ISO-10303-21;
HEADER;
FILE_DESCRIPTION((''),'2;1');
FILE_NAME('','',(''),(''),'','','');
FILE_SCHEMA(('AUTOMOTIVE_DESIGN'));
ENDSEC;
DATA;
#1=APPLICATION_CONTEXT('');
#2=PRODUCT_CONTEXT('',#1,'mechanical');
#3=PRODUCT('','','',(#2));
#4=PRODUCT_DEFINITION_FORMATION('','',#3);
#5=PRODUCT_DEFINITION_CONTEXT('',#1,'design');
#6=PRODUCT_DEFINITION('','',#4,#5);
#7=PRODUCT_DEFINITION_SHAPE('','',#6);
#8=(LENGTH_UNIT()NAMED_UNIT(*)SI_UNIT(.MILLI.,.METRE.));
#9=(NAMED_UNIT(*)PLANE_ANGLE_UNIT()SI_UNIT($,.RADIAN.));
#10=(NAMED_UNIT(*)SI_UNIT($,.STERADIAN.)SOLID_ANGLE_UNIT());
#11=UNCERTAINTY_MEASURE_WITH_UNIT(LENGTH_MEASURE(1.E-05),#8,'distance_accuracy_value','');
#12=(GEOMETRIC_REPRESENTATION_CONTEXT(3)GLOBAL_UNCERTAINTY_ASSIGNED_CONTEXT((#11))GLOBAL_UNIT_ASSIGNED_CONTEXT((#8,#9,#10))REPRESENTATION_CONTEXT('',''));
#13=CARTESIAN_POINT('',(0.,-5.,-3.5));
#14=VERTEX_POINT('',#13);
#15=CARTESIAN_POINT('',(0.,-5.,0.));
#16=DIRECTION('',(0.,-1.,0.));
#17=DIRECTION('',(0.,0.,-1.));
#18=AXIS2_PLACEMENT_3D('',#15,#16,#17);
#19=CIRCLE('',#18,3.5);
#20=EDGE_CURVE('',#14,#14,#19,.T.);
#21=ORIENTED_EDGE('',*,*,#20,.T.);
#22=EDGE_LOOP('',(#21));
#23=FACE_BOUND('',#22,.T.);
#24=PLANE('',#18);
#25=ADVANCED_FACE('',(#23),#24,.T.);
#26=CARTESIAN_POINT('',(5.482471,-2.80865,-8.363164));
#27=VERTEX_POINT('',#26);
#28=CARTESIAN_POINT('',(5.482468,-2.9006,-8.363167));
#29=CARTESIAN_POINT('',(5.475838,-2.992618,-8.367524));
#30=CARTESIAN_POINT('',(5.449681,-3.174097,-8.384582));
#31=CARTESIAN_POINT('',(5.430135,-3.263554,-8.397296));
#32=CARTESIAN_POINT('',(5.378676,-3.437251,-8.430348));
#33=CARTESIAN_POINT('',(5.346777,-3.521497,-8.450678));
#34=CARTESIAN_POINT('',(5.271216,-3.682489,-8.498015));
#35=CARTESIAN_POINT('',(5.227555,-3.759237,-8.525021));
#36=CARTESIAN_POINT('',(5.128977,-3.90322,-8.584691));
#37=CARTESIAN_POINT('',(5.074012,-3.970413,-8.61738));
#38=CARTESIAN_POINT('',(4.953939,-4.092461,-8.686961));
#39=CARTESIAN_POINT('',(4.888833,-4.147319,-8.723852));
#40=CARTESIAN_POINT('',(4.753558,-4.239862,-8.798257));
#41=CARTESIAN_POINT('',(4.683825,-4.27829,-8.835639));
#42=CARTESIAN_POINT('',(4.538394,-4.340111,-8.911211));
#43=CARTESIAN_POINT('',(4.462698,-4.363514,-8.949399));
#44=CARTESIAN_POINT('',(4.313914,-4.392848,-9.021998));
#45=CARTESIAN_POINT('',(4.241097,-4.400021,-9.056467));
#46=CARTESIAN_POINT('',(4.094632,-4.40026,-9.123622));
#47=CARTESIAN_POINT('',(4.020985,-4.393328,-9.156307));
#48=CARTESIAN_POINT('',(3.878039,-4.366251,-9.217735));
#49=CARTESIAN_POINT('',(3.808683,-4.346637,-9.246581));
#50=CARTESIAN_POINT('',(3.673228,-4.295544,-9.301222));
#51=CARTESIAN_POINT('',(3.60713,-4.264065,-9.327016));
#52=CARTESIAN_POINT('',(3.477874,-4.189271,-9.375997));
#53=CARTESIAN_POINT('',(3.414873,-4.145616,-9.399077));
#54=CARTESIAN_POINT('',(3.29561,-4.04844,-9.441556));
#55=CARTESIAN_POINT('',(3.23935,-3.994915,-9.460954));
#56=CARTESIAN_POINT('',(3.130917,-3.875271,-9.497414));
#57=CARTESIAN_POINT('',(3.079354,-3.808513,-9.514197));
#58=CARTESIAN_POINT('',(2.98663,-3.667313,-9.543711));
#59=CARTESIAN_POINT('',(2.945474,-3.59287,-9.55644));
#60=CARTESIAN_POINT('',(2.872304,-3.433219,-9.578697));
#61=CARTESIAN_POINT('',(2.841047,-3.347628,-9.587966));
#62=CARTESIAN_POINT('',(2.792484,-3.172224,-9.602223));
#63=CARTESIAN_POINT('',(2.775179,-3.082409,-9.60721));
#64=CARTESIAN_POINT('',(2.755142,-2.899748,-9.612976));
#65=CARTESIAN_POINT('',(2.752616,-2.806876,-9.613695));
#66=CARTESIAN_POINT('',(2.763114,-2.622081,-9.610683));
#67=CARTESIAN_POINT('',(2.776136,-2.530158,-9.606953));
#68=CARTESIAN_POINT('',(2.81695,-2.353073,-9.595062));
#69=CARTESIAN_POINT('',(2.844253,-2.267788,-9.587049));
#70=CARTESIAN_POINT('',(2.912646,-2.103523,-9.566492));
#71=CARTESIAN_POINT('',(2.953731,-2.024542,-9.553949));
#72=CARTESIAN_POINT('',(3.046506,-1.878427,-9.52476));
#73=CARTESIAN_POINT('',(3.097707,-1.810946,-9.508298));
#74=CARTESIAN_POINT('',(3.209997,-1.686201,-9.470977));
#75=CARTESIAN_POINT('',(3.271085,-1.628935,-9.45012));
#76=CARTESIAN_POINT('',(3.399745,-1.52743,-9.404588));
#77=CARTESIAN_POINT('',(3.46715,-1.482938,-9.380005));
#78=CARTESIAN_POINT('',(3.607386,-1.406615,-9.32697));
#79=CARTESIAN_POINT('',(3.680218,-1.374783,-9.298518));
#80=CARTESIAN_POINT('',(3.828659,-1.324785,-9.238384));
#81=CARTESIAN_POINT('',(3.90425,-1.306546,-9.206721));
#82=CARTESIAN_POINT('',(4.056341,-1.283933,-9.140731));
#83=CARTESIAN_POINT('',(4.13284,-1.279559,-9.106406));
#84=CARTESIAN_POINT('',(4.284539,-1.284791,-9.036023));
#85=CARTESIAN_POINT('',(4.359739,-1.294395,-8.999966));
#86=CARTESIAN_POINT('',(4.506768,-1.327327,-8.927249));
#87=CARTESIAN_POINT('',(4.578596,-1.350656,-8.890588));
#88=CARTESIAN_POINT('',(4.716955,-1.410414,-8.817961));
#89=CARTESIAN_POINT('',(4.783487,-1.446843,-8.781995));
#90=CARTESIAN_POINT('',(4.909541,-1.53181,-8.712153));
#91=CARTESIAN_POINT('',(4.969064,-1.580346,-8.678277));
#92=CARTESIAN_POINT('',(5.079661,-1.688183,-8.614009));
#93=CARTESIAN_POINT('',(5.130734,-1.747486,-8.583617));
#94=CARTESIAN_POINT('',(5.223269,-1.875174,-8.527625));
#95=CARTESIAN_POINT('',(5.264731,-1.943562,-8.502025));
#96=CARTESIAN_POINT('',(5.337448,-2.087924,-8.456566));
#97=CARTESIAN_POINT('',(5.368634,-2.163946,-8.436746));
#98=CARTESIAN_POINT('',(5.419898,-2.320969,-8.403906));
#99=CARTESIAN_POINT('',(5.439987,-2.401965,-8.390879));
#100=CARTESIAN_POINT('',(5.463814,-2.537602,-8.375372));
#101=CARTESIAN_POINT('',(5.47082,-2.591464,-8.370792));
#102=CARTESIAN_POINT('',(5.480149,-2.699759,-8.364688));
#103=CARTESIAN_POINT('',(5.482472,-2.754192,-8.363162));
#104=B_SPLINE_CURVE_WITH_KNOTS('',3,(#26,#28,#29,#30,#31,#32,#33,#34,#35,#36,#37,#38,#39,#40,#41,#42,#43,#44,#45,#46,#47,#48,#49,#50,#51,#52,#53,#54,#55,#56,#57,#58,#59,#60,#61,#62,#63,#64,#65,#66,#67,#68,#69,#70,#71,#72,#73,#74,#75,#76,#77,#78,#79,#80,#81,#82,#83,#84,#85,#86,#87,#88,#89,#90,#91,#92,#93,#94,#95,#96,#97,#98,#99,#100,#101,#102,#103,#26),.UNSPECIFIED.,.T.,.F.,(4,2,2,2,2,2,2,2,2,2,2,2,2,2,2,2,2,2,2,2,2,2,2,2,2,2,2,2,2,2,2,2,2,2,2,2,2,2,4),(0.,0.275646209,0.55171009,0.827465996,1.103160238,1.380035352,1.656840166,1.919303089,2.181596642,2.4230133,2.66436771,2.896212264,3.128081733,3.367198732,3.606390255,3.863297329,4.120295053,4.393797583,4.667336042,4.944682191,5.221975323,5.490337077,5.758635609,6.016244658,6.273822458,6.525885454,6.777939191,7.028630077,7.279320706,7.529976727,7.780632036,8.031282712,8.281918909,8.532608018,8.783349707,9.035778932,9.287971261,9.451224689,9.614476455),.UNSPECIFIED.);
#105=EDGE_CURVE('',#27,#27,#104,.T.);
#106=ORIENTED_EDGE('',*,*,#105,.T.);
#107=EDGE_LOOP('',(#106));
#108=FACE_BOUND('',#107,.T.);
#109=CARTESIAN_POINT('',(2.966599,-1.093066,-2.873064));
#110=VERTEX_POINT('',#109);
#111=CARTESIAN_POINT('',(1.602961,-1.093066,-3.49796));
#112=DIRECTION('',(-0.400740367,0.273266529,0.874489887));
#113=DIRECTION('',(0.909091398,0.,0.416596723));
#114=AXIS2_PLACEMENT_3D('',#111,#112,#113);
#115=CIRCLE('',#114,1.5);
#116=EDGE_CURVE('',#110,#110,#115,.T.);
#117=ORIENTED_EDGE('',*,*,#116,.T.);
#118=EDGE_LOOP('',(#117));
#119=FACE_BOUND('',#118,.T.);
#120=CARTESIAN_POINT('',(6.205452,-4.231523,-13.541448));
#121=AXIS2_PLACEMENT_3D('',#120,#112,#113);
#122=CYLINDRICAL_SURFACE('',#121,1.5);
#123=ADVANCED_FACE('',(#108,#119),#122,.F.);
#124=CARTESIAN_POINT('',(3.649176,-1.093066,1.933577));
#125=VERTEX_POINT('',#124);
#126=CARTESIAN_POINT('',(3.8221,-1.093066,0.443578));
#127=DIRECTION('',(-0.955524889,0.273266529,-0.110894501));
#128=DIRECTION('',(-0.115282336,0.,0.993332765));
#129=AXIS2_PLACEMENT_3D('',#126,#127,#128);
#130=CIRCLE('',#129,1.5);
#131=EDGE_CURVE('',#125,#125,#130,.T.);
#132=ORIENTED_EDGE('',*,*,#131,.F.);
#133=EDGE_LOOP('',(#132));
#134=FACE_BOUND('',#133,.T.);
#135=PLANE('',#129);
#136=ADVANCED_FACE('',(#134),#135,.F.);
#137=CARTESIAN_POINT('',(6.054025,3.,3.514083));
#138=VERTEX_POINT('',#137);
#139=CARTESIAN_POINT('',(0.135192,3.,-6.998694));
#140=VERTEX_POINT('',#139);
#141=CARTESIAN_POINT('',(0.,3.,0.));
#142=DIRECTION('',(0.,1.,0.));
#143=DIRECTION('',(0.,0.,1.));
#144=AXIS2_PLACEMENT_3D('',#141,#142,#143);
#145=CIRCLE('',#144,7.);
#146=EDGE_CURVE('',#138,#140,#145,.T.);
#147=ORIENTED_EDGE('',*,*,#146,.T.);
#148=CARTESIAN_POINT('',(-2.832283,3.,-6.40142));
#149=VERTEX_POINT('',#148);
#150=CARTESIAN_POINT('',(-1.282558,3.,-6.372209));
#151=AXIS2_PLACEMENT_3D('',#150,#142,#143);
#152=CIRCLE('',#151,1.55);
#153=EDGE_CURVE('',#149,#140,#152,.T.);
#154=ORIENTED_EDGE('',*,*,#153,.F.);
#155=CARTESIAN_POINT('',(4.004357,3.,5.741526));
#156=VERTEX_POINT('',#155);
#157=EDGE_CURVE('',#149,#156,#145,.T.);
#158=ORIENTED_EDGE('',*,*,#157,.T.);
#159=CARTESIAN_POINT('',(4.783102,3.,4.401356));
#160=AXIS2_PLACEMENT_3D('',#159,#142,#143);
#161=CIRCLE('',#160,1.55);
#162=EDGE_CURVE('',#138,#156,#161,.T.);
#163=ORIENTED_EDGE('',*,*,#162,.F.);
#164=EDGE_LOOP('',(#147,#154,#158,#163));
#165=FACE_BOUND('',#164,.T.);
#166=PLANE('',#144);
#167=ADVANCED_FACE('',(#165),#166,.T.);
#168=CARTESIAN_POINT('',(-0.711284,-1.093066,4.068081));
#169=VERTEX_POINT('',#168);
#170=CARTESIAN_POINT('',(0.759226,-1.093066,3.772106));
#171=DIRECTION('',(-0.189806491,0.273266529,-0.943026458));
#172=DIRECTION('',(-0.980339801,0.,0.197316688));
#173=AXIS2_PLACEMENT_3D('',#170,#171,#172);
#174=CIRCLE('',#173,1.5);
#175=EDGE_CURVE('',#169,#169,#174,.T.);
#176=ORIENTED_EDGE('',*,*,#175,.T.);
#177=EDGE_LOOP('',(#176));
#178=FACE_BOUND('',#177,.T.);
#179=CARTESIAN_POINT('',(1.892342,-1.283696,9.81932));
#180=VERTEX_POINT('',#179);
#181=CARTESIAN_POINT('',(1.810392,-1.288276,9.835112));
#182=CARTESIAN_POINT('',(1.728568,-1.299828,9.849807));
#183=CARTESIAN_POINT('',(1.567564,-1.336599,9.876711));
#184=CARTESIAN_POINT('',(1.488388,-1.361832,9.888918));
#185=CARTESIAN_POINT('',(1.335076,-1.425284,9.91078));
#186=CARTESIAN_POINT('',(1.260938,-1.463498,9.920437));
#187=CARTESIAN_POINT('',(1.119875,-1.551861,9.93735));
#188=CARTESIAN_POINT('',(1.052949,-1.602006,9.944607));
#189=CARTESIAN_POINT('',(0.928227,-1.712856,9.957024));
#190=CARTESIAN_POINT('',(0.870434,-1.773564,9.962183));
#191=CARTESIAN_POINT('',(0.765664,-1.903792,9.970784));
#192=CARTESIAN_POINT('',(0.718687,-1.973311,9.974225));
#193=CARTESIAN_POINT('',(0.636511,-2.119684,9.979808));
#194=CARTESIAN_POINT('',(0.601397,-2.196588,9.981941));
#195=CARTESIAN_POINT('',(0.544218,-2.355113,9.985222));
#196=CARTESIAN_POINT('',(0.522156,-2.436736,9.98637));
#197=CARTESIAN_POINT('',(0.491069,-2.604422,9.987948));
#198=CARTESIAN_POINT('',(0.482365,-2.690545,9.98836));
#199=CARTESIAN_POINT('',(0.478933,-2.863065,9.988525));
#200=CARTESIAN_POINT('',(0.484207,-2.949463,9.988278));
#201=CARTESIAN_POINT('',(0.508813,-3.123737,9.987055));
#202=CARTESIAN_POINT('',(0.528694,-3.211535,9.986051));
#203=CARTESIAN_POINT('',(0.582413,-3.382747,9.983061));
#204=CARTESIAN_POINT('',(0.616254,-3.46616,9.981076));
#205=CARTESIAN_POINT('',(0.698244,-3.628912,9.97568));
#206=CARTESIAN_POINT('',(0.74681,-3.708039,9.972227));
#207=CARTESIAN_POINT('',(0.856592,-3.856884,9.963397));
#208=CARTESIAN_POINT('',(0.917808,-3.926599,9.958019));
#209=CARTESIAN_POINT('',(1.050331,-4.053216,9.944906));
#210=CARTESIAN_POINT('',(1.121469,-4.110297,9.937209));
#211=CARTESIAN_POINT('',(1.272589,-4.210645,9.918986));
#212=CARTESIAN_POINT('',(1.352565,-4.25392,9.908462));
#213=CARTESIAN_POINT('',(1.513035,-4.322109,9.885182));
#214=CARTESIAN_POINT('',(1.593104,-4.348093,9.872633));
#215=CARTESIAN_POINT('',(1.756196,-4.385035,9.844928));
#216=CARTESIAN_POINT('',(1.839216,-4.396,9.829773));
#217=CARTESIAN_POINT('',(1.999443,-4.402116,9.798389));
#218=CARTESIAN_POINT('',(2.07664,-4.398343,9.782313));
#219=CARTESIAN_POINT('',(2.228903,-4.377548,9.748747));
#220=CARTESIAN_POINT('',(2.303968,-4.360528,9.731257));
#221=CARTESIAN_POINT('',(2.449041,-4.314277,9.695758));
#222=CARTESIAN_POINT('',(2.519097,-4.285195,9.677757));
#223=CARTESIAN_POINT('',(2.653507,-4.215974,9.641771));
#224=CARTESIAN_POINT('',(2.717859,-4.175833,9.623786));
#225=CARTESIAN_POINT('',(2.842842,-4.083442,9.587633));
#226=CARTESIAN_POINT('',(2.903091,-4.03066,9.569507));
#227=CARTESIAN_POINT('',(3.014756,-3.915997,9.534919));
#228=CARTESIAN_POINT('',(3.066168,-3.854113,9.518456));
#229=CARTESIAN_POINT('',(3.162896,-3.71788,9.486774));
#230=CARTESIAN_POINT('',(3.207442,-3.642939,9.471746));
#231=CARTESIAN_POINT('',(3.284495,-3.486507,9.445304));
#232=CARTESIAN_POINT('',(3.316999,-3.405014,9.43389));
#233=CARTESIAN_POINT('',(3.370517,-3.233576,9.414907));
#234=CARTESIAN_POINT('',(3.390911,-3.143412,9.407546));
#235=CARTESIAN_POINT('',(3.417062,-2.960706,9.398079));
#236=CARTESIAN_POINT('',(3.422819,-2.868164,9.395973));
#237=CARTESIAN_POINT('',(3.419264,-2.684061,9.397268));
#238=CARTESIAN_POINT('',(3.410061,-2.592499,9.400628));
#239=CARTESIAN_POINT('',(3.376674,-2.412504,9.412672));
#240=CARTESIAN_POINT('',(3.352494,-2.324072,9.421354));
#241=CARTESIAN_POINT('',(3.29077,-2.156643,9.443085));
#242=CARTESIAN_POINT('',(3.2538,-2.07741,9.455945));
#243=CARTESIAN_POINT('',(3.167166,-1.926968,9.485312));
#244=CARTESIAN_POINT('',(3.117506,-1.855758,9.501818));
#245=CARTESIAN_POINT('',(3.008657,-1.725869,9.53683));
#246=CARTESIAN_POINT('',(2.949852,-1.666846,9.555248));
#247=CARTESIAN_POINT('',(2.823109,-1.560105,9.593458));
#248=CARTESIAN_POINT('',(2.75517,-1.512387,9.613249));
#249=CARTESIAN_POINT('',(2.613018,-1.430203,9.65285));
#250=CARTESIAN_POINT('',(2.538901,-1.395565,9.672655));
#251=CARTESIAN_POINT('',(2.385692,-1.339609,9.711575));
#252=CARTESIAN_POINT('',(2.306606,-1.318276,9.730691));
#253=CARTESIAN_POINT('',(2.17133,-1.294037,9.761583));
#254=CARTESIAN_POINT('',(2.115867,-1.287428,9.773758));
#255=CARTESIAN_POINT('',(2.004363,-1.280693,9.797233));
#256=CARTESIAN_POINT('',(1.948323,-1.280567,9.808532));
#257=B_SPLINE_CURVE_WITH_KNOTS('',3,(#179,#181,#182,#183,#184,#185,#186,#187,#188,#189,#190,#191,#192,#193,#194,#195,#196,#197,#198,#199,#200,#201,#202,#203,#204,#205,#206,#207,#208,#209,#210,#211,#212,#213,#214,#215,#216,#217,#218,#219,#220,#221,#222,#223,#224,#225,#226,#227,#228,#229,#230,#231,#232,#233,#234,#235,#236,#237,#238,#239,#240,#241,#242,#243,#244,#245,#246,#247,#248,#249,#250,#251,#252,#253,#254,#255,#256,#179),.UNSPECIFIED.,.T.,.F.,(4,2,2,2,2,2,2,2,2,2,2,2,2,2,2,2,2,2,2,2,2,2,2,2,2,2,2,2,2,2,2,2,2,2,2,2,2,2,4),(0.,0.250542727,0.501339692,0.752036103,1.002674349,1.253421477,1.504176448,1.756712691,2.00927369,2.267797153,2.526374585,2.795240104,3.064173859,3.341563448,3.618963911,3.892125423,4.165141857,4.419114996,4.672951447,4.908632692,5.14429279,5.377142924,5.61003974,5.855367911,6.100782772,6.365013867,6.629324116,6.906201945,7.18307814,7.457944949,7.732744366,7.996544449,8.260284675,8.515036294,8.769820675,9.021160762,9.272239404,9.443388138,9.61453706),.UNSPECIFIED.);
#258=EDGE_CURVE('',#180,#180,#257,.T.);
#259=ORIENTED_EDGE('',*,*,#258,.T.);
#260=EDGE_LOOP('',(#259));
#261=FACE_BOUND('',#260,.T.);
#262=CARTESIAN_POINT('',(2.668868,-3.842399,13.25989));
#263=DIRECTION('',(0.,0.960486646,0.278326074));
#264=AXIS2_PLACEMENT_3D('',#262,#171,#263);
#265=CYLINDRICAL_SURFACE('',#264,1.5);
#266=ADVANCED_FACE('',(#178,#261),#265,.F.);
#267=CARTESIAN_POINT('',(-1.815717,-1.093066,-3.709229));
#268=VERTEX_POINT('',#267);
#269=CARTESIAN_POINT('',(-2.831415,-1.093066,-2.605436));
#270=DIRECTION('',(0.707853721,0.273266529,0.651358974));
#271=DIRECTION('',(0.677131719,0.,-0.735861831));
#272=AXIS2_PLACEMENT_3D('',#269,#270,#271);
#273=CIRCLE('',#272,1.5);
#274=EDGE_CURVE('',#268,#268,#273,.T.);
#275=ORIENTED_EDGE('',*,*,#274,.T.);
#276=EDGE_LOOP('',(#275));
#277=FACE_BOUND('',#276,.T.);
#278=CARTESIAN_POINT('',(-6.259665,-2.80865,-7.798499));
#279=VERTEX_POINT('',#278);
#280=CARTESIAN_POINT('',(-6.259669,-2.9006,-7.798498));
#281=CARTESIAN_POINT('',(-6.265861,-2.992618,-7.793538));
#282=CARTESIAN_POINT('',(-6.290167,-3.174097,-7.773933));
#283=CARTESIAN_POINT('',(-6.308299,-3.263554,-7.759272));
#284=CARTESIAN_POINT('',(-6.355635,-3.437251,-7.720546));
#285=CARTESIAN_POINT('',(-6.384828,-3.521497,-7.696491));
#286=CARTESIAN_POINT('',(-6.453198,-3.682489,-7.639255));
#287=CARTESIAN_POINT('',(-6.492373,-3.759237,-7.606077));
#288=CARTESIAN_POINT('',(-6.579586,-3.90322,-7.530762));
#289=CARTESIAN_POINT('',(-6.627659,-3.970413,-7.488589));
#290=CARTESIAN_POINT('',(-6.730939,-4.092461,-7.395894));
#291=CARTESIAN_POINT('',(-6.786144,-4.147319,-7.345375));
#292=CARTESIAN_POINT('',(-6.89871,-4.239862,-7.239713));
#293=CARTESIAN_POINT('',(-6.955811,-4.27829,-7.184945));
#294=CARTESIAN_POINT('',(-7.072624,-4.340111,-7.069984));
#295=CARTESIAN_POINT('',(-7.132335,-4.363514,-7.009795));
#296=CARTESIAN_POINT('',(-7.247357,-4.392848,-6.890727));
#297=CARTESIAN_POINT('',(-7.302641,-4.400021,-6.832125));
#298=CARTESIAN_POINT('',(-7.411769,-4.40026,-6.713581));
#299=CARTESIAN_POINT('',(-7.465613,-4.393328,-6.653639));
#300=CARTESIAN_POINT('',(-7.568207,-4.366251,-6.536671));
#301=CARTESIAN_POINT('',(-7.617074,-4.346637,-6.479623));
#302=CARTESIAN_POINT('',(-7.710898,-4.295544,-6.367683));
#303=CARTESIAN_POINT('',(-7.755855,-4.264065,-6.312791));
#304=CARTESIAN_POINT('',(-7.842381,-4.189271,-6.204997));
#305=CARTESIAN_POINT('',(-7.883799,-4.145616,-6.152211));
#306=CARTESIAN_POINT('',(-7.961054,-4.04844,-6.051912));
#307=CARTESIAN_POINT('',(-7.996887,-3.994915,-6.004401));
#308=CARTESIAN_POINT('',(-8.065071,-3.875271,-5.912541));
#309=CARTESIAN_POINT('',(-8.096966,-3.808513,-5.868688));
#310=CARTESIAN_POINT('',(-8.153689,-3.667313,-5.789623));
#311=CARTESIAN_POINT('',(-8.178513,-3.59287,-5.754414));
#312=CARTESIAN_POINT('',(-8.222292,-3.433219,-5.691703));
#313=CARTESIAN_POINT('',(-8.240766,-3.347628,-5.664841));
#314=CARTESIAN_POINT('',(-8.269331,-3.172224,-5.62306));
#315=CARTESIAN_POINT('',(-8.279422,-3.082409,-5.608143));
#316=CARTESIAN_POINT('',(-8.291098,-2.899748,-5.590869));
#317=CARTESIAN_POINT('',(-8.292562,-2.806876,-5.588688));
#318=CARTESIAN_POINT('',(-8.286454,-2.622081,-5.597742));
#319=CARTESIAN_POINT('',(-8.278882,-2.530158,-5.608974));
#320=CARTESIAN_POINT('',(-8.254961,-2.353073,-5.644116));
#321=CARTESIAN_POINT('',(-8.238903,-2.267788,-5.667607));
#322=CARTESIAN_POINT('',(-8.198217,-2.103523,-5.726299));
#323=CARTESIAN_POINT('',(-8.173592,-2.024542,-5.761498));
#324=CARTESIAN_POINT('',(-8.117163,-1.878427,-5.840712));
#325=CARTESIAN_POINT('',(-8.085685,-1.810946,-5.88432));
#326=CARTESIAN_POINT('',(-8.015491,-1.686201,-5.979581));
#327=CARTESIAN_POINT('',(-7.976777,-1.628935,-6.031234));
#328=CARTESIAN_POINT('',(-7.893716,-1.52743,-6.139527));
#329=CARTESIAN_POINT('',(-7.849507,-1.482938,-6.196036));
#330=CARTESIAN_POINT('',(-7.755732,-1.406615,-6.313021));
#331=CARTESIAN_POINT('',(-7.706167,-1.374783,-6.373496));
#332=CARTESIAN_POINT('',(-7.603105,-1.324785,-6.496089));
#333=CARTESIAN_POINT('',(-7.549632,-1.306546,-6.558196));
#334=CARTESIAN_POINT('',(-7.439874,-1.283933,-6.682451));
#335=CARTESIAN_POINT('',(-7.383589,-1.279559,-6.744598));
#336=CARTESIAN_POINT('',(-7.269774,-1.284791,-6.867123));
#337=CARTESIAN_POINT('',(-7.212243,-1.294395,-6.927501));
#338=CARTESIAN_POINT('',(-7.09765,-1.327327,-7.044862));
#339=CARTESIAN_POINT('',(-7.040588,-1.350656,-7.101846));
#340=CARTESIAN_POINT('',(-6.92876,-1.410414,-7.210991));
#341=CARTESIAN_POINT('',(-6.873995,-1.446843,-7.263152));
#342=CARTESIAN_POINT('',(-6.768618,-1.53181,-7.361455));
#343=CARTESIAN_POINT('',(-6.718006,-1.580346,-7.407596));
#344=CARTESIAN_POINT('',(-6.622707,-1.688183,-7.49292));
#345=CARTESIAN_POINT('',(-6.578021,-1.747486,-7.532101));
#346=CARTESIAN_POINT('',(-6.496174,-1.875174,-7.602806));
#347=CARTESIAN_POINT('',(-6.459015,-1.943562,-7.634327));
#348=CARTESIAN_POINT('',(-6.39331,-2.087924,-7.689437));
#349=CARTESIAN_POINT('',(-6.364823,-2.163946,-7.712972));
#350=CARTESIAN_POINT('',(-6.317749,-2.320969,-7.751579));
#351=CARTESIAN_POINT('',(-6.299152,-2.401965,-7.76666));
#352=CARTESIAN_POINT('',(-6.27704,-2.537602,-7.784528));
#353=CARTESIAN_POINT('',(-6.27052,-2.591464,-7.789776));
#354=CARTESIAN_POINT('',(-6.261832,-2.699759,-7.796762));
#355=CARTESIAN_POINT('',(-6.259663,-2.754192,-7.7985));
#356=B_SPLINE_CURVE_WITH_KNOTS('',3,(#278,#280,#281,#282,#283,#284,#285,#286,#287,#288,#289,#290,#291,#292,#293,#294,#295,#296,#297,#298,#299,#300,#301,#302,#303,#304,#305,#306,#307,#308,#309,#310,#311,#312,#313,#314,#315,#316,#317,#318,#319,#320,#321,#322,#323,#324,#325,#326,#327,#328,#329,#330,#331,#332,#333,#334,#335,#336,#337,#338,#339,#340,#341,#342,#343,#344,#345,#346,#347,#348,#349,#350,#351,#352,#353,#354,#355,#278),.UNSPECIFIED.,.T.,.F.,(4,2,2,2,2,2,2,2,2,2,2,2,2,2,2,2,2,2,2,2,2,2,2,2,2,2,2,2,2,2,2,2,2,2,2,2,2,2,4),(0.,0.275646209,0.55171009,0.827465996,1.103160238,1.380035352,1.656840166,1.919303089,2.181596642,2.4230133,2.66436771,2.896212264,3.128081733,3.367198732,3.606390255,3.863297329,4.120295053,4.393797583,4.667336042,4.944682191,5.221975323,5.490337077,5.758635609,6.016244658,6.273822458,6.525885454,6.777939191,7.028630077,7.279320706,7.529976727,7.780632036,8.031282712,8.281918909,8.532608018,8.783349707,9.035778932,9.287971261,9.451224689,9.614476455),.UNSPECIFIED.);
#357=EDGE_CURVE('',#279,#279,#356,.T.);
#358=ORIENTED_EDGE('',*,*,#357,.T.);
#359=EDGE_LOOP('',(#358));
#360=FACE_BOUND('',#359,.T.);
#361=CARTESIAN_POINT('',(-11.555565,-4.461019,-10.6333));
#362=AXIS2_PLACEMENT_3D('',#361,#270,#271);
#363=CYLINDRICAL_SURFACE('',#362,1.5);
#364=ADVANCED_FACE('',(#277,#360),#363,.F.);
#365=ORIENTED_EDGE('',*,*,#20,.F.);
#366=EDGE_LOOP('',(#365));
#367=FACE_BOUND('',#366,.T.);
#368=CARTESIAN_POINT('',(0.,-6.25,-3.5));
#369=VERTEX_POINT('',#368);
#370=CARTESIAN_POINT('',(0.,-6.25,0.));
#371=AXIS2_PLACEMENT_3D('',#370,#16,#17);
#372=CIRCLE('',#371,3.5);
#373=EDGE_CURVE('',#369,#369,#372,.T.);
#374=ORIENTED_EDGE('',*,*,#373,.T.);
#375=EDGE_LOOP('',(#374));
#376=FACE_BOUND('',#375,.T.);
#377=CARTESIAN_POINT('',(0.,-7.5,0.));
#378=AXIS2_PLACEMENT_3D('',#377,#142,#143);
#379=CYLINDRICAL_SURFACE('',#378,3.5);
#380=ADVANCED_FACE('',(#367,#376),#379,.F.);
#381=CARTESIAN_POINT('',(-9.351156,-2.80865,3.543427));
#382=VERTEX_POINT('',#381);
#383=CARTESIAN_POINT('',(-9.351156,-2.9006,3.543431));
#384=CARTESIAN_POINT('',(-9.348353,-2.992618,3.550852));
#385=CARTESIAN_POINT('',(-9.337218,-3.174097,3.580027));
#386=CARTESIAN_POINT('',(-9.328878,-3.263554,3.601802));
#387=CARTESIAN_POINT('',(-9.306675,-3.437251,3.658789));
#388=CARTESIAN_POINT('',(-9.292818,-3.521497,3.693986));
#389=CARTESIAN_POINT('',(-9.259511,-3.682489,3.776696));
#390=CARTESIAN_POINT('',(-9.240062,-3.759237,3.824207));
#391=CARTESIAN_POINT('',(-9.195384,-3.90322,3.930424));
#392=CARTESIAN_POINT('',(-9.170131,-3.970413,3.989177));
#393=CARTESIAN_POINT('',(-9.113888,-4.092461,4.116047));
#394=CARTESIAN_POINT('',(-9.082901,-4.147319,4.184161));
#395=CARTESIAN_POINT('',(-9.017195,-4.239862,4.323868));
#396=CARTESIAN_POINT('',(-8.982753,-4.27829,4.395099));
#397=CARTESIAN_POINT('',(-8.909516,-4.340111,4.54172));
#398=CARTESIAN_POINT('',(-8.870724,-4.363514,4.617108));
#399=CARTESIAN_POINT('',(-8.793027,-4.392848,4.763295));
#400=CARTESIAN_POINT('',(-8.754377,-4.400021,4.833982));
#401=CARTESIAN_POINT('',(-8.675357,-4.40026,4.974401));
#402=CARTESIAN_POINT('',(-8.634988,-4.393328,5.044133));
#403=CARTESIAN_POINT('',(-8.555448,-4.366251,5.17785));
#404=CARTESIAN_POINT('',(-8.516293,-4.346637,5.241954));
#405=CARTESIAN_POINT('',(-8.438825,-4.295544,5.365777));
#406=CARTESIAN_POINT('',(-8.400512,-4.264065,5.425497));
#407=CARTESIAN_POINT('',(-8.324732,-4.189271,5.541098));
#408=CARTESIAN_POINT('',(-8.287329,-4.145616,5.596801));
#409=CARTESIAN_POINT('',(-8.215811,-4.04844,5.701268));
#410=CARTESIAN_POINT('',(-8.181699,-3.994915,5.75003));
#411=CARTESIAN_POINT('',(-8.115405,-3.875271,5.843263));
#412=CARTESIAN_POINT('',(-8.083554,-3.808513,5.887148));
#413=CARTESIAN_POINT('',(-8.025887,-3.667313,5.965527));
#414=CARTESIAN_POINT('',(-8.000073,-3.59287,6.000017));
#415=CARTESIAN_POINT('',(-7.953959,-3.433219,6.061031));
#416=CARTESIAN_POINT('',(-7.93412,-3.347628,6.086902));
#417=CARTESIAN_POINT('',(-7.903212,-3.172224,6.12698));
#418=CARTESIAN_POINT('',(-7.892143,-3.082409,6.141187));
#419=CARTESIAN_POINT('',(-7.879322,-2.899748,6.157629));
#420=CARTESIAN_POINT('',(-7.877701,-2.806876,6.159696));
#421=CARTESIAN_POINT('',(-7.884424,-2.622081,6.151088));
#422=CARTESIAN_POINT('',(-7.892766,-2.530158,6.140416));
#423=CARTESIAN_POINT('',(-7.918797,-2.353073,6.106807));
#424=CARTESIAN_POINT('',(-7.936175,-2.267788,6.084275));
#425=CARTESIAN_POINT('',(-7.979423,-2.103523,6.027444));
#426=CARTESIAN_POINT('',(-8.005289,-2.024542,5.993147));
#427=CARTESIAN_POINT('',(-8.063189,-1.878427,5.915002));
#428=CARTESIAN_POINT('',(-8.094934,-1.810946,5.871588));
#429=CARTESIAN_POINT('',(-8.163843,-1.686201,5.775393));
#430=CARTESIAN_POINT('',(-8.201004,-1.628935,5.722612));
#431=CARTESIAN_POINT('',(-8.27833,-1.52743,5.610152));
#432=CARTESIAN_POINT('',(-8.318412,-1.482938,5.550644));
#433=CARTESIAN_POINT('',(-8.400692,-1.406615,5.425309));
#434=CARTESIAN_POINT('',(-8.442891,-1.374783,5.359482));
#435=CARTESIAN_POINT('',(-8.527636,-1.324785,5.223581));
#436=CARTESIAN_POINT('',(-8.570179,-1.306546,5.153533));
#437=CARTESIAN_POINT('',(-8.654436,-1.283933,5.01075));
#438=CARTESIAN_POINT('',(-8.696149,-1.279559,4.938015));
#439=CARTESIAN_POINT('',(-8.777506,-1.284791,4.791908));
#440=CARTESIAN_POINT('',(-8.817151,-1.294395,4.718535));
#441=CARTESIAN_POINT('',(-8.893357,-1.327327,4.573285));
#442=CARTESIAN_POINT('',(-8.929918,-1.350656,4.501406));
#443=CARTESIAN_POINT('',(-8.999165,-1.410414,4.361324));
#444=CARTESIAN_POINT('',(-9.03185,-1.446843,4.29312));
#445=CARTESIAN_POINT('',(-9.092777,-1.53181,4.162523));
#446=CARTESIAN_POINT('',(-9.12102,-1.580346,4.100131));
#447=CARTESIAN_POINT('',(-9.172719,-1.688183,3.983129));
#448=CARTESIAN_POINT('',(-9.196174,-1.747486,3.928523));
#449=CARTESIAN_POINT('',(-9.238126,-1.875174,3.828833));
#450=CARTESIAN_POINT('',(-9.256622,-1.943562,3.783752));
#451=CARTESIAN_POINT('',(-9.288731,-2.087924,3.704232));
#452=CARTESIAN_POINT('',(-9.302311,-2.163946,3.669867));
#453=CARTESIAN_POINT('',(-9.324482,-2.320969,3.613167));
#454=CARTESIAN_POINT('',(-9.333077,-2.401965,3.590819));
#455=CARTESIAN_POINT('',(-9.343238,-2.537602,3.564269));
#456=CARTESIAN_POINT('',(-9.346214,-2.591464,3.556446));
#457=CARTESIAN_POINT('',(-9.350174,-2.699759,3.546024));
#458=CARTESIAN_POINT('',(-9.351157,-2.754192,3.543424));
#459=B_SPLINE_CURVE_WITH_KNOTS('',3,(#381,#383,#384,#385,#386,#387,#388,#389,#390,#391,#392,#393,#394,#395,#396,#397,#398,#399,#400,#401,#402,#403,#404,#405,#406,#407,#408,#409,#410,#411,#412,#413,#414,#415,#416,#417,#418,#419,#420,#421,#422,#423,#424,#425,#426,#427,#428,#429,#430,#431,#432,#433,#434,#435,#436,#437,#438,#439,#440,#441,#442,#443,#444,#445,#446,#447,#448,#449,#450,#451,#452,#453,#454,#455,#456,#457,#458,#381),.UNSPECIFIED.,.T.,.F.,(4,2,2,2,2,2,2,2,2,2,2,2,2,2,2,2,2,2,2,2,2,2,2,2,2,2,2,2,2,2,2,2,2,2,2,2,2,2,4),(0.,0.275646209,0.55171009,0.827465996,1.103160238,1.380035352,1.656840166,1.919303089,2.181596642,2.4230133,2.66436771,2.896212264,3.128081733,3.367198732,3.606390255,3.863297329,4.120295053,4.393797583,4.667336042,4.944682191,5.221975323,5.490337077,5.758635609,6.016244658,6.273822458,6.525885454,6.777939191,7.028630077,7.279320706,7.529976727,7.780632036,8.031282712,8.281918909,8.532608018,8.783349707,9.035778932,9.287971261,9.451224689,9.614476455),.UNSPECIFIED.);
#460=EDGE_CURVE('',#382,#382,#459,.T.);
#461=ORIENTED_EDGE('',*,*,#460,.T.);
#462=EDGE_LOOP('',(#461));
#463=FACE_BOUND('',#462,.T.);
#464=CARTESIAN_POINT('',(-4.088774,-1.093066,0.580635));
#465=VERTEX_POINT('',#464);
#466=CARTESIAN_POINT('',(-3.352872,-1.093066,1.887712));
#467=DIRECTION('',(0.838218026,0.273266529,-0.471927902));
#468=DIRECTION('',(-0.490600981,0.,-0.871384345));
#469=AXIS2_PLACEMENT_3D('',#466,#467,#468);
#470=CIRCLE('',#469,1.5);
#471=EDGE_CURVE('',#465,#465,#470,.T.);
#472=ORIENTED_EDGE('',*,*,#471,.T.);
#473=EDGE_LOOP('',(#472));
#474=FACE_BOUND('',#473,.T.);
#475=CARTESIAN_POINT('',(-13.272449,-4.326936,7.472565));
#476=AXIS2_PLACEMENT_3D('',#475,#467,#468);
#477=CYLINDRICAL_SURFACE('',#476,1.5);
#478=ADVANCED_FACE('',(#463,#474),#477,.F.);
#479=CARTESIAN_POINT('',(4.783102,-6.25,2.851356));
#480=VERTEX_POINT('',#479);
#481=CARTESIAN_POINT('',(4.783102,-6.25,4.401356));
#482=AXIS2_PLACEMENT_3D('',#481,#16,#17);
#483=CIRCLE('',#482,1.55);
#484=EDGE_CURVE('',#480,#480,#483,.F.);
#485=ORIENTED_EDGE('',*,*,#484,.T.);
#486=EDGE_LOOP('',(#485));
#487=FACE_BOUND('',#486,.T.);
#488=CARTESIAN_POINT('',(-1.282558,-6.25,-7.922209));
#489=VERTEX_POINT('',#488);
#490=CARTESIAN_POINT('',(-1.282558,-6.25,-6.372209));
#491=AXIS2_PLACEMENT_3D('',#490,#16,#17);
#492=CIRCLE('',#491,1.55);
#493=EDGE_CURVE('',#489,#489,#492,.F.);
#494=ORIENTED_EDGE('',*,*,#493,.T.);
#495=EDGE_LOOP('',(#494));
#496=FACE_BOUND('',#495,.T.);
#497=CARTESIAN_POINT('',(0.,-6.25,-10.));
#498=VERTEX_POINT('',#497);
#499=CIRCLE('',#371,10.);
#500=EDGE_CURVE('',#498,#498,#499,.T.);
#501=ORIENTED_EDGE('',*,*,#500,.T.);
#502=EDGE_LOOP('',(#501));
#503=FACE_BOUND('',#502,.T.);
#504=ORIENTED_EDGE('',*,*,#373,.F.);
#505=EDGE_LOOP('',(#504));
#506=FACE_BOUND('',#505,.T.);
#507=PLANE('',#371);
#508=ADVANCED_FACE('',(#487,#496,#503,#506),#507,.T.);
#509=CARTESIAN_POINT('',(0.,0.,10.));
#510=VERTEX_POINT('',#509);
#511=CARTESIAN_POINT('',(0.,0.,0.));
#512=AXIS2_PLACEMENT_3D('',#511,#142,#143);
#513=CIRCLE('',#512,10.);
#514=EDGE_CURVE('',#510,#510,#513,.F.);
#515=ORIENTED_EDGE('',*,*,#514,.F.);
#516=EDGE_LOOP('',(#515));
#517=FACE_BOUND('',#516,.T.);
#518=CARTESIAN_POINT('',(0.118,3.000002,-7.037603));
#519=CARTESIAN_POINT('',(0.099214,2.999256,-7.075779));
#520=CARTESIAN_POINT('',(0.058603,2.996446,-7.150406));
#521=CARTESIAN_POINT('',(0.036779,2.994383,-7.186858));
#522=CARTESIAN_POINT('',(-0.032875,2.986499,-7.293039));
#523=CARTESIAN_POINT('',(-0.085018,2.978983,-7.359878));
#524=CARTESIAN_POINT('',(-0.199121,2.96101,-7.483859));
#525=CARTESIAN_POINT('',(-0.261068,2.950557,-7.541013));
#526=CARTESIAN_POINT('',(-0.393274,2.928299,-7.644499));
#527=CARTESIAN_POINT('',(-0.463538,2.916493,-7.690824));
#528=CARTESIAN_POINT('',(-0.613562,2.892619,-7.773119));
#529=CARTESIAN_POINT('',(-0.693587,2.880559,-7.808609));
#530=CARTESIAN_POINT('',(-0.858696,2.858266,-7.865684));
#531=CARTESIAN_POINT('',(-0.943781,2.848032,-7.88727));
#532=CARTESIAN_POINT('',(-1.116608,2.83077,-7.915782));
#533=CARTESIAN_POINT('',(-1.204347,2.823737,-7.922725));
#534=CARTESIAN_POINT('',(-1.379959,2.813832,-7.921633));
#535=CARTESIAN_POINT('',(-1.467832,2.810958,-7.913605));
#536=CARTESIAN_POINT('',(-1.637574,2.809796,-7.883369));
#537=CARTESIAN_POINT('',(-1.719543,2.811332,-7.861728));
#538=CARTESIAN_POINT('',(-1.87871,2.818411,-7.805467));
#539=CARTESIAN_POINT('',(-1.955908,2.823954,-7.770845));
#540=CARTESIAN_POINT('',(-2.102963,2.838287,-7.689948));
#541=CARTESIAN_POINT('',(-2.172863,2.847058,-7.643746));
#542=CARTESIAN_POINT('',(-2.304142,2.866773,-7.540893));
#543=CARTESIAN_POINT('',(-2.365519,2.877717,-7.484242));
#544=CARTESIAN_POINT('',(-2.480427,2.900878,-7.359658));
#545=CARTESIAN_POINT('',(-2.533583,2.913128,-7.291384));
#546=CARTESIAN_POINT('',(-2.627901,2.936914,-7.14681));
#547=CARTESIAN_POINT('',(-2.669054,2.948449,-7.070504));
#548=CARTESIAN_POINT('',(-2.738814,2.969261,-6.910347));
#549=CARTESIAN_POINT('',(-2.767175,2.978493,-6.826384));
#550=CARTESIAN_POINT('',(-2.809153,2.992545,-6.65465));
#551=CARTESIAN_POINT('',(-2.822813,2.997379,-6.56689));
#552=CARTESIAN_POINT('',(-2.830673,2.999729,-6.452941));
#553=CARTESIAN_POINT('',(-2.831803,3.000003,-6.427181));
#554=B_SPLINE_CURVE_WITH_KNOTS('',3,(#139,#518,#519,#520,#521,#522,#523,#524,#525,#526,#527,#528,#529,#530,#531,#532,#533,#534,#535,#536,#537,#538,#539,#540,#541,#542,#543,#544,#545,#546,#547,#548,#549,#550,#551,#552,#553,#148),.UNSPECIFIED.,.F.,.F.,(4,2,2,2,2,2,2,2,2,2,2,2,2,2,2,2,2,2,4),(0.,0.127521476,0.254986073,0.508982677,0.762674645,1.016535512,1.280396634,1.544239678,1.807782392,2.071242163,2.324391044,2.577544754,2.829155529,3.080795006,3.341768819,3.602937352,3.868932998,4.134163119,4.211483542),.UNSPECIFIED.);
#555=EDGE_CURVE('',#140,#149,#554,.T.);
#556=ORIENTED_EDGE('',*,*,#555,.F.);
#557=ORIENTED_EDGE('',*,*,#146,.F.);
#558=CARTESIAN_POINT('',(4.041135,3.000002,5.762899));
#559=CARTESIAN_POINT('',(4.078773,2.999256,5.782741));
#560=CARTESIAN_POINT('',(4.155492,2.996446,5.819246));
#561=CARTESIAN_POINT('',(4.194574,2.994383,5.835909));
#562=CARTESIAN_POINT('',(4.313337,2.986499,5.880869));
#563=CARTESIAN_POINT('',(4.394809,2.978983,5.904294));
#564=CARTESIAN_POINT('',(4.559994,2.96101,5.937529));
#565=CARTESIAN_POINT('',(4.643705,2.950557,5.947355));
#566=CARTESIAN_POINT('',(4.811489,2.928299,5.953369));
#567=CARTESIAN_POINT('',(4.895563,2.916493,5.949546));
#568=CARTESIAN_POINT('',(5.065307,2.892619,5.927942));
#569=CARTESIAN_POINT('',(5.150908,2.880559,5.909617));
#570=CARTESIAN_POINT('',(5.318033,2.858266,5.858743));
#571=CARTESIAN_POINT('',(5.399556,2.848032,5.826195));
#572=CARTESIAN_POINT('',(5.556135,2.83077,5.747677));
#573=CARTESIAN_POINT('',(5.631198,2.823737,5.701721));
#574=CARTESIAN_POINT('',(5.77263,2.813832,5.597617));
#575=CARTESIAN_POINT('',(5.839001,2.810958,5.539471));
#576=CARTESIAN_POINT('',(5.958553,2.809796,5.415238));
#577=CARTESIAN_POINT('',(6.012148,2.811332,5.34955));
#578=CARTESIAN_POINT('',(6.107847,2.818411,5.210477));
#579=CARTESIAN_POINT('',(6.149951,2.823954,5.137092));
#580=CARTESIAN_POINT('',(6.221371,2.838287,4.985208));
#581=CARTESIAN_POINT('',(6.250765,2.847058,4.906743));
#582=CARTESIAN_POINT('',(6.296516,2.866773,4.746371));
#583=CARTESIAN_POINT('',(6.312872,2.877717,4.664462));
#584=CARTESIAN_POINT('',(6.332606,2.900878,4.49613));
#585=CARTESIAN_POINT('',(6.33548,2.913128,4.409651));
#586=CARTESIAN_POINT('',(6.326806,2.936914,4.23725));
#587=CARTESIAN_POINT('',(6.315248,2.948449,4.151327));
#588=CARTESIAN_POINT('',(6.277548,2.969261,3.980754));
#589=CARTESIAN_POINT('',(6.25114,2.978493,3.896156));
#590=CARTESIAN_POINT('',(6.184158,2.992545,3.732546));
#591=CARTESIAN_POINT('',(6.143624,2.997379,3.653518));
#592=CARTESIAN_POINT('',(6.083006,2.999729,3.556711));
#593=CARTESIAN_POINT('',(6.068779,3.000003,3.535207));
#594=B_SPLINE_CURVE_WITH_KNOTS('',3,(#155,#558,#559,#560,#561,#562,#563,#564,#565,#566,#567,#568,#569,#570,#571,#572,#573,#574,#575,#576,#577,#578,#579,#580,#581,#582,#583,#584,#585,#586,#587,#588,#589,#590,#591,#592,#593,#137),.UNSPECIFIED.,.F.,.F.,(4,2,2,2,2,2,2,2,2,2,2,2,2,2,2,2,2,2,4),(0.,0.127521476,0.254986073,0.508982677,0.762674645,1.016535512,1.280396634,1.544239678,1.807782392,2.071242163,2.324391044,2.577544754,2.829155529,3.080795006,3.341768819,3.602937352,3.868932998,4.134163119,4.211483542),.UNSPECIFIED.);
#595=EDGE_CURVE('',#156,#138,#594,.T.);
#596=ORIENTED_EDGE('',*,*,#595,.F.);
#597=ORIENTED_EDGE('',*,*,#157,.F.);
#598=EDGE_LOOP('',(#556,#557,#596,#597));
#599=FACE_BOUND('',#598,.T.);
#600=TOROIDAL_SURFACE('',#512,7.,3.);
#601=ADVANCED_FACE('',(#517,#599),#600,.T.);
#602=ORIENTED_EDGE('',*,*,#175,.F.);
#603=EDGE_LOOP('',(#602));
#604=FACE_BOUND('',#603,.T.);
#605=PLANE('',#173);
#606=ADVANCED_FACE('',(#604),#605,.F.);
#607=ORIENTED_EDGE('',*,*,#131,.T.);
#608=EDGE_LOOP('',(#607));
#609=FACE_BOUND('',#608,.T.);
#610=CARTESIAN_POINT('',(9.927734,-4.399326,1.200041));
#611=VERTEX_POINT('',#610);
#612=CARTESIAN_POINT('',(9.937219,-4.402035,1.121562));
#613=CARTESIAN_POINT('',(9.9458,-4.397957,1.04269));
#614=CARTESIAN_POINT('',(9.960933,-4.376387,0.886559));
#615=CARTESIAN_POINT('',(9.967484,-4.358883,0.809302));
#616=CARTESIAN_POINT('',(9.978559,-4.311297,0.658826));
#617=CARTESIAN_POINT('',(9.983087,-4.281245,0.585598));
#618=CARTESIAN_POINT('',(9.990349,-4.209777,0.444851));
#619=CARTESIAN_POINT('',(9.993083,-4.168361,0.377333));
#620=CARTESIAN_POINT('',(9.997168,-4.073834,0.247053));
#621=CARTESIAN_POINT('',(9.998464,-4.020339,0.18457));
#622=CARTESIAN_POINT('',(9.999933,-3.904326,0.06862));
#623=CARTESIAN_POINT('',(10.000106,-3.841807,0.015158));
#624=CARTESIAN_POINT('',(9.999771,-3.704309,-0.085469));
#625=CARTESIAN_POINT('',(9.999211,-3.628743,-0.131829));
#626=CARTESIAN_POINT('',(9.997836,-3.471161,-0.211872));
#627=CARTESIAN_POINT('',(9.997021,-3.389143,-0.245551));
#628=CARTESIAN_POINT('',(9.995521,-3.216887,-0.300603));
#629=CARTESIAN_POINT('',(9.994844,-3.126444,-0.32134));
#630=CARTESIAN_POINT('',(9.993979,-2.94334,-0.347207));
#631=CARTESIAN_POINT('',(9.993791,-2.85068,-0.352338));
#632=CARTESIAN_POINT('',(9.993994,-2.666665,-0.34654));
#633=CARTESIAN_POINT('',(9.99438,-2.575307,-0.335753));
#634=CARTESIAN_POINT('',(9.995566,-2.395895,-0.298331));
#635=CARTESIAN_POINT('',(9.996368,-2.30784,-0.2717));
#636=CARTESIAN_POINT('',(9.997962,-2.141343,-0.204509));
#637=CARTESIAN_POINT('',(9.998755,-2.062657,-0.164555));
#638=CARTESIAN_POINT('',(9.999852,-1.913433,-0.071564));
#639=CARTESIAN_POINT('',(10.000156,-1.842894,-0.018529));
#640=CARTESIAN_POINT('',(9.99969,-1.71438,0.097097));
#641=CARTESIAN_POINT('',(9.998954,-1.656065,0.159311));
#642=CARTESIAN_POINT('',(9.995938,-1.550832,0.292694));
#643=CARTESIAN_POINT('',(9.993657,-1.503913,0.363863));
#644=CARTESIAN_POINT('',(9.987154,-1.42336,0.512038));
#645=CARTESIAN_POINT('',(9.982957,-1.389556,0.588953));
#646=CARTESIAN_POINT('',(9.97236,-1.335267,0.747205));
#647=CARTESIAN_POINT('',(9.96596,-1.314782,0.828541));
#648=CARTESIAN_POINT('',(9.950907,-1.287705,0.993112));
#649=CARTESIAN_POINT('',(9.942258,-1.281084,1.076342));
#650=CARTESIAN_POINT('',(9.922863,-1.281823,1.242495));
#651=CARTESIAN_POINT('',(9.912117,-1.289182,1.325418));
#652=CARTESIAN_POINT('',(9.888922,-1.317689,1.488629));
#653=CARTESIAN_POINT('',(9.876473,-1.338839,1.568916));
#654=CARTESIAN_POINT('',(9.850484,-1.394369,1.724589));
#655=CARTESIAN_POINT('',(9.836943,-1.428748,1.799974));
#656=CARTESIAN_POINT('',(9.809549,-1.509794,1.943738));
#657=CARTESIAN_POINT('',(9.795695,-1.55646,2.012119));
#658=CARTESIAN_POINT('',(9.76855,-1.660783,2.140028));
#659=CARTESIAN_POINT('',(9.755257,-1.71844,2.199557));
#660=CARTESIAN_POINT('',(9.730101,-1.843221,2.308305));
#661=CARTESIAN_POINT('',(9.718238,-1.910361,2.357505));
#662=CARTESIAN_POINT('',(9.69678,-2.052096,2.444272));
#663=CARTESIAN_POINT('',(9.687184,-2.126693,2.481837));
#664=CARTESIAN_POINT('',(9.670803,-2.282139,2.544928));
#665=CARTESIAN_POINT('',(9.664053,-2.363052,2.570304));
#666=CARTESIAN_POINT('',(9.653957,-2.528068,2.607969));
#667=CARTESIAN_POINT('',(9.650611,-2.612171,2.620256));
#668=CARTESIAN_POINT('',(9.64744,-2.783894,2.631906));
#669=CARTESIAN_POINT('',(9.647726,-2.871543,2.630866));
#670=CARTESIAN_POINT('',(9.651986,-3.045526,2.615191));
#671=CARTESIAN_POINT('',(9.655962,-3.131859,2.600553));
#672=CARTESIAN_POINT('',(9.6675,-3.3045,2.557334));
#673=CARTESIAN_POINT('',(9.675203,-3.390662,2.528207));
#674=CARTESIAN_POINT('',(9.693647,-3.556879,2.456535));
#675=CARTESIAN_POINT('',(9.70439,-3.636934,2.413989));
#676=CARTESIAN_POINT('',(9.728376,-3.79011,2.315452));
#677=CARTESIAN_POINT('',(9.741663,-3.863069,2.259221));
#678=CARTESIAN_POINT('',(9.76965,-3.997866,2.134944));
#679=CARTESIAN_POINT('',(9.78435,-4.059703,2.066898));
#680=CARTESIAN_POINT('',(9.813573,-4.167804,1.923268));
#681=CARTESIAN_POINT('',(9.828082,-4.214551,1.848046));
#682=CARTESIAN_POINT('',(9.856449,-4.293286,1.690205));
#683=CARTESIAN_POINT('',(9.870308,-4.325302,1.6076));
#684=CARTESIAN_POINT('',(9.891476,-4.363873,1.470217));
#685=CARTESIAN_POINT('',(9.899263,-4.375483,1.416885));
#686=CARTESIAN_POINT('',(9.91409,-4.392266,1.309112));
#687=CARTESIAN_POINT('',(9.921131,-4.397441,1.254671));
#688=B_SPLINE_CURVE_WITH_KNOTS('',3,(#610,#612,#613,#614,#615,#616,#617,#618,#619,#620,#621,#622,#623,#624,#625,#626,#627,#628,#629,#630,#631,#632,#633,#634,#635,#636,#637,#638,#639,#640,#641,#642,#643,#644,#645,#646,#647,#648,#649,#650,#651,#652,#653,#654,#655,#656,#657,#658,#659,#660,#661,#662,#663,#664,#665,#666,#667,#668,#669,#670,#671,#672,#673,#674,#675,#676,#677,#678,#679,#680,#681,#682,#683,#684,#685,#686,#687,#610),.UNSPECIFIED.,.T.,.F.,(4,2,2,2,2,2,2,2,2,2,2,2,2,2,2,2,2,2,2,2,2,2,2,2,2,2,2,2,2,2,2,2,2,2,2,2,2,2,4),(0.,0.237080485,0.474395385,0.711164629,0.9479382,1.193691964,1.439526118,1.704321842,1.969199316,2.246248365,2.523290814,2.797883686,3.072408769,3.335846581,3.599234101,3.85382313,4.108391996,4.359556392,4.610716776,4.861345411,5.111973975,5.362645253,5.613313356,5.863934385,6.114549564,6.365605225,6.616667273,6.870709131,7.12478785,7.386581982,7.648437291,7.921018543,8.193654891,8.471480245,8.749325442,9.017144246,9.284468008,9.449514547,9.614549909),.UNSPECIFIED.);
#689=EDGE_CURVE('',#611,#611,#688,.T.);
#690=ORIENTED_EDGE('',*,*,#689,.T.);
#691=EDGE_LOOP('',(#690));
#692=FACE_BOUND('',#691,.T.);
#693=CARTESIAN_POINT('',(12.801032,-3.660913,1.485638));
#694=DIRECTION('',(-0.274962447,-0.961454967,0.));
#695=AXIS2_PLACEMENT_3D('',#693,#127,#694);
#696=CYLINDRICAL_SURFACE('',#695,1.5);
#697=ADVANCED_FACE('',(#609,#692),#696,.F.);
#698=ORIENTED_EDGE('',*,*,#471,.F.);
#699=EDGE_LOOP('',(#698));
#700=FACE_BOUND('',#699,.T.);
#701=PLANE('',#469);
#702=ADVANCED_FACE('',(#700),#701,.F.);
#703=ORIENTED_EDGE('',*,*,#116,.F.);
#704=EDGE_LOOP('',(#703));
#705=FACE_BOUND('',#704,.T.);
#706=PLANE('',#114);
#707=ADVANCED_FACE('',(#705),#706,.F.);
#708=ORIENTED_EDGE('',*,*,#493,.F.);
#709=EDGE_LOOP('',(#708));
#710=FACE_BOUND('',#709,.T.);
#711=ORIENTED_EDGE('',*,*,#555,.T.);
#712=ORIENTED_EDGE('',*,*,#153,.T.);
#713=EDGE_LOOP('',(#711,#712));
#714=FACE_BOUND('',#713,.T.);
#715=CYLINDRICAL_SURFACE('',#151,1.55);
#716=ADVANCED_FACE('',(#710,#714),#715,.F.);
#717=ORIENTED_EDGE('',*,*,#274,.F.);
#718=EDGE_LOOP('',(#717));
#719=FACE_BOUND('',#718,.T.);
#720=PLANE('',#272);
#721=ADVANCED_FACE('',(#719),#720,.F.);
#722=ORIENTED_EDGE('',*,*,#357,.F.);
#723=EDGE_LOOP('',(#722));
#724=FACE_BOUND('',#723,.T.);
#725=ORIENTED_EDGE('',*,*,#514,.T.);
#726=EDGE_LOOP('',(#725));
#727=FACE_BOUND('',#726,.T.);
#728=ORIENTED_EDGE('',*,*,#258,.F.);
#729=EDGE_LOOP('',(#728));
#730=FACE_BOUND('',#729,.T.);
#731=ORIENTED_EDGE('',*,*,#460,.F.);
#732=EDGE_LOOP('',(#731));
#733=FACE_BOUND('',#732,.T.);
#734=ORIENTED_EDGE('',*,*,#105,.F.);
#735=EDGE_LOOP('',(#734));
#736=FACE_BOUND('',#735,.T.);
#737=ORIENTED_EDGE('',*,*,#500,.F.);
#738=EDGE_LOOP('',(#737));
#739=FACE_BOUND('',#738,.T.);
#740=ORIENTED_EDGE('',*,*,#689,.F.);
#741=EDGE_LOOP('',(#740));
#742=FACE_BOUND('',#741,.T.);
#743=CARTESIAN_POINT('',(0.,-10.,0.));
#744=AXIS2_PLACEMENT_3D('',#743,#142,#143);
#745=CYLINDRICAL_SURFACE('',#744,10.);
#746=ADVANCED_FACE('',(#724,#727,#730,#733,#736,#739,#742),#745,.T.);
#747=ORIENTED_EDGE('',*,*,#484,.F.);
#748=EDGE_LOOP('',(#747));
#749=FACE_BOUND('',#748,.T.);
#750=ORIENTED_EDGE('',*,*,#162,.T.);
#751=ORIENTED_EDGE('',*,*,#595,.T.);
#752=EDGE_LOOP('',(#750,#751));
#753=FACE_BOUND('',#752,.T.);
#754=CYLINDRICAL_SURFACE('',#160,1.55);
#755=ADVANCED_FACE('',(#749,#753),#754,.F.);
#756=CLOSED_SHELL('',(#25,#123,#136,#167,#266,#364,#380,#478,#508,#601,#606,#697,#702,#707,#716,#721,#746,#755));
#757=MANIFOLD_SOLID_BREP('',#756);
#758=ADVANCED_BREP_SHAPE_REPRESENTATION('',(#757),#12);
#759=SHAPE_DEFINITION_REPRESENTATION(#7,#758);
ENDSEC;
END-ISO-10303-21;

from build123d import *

# Parameters (mm, degrees)
BOSS_EXTRUDE1_DEPTH        = 3
BOSS_EXTRUDE1_DEPTH_BACK   = 10
SKETCH1_R                  = 10
SKETCH4_R                  = 1.5
HOLE_DEPTH                 = 20.973741561
HOLECIR_COUNT              = 5
SKETCH6_R                  = 3.5
BEARINGHOLE_DEPTH          = 2.5
SKETCH7_R                  = 2
SHAFTHOLE_DEPTH            = 17.248076982
F_3_1_3_1_DIAMETER_HOLE1_D = 3.1
FILLET2_R                  = 3
CUT_EXTRUDE1_START         = 10
SKETCH11_R                 = 10
CUT_EXTRUDE1_DEPTH         = 10


with BuildPart() as part:
    # Sketch1 → Boss-Extrude1 (new, two sides: drawn at the far end of the back side and taken through both)
    with BuildSketch(Plane(origin=(0, 0, 0), x_dir=(1, 0, 0), z_dir=(0, 1, 0)).offset(-BOSS_EXTRUDE1_DEPTH_BACK)):
        with Locations(Location((0, 0, 0), (0, 0, 270))):
            Circle(SKETCH1_R)
    extrude(amount=BOSS_EXTRUDE1_DEPTH + BOSS_EXTRUDE1_DEPTH_BACK)

    # Sketch4 → hole (cut, through all)
    with BuildSketch(Plane(origin=(-3.352872105, -1.093066116, 1.887711608), x_dir=(-0.4486862613641547, -0.14627571033740308, -0.8816371449912632), z_dir=(0.8382180262940947, 0.2732665289126682, -0.47192790187872385))):
        with Locations(Location((0, 0, 0), (0, 0, 8.746528197))):
            Circle(SKETCH4_R)
    hole = extrude(amount=-HOLE_DEPTH, mode=Mode.SUBTRACT)

    # holecir: hole ×5 about axis
    holecir_axis = Axis((0, 0, 0), (0, 1, 0))
    for i in range(1, HOLECIR_COUNT):
        add(hole.rotate(holecir_axis, i * 360 / HOLECIR_COUNT), mode=Mode.SUBTRACT)

    # Sketch6 → bearinghole (cut)
    with BuildSketch(Plane(origin=(0, -5, 0), x_dir=(-1, 0, 0), z_dir=(0, -1, 0))):
        with Locations(Location((0, 0, 0), (0, 0, 90))):
            Circle(SKETCH6_R)
    extrude(amount=BEARINGHOLE_DEPTH, mode=Mode.SUBTRACT)

    # Sketch7 → shafthole (cut, through all)
    with BuildSketch(Plane(origin=(0, -5, 0), x_dir=(-1, 0, 0), z_dir=(0, -1, 0))):
        with Locations(Location((0, 0, 0), (0, 0, 90))):
            Circle(SKETCH7_R)
    extrude(amount=SHAFTHOLE_DEPTH, mode=Mode.SUBTRACT)

    # Ø3.1 (3.1) Diameter Hole1 (through all)
    with Locations(Plane(origin=(0, 3, 0), x_dir=(1, 0, 0), z_dir=(0, 1, 0))):
        with Locations((-1.282558474, 6.372208703), (4.783101903, -4.401356176)):
            Hole(F_3_1_3_1_DIAMETER_HOLE1_D / 2)

    # Fillet2
    # the kernel refuses this fillet: 3 mm, written as the material it takes off along each edge
    with BuildSketch(Plane(origin=(0, 3, 0), x_dir=(0, 0, 1), z_dir=(-1, 0, 0))) as fillet2_piece_1:
        with BuildLine():
            CenterArc((10 - FILLET2_R, -FILLET2_R), FILLET2_R, 0, 90)
            Line((10 - FILLET2_R, 0), (10, 0))
            Line((10, 0), (10, -FILLET2_R))
        make_face()
    revolve(axis=Axis((0, 3, 0), (0, 1, 0)), mode=Mode.SUBTRACT)
    with BuildSketch(Plane(origin=(0, -10, 0), x_dir=(0, 0, 1), z_dir=(-1, 0, 0))) as fillet2_piece_2:
        with BuildLine():
            CenterArc((10 - FILLET2_R, FILLET2_R), FILLET2_R, 270, 90)
            Line((10 - FILLET2_R, 0), (10, 0))
            Line((10, 0), (10, FILLET2_R))
        make_face()
    revolve(axis=Axis((0, -10, 0), (0, 1, 0)), mode=Mode.SUBTRACT)

    # Sketch11 → Cut-Extrude1 (cut)
    with BuildSketch(Plane(origin=(0, -6.25, 0), x_dir=(-1, 0, 0), z_dir=(0, -1, 0)).offset(CUT_EXTRUDE1_START)):
        with Locations(Location((0, 0, 0), (0, 0, 270))):
            Circle(SKETCH11_R)
    extrude(amount=-CUT_EXTRUDE1_DEPTH, mode=Mode.SUBTRACT)


solid = part.part
